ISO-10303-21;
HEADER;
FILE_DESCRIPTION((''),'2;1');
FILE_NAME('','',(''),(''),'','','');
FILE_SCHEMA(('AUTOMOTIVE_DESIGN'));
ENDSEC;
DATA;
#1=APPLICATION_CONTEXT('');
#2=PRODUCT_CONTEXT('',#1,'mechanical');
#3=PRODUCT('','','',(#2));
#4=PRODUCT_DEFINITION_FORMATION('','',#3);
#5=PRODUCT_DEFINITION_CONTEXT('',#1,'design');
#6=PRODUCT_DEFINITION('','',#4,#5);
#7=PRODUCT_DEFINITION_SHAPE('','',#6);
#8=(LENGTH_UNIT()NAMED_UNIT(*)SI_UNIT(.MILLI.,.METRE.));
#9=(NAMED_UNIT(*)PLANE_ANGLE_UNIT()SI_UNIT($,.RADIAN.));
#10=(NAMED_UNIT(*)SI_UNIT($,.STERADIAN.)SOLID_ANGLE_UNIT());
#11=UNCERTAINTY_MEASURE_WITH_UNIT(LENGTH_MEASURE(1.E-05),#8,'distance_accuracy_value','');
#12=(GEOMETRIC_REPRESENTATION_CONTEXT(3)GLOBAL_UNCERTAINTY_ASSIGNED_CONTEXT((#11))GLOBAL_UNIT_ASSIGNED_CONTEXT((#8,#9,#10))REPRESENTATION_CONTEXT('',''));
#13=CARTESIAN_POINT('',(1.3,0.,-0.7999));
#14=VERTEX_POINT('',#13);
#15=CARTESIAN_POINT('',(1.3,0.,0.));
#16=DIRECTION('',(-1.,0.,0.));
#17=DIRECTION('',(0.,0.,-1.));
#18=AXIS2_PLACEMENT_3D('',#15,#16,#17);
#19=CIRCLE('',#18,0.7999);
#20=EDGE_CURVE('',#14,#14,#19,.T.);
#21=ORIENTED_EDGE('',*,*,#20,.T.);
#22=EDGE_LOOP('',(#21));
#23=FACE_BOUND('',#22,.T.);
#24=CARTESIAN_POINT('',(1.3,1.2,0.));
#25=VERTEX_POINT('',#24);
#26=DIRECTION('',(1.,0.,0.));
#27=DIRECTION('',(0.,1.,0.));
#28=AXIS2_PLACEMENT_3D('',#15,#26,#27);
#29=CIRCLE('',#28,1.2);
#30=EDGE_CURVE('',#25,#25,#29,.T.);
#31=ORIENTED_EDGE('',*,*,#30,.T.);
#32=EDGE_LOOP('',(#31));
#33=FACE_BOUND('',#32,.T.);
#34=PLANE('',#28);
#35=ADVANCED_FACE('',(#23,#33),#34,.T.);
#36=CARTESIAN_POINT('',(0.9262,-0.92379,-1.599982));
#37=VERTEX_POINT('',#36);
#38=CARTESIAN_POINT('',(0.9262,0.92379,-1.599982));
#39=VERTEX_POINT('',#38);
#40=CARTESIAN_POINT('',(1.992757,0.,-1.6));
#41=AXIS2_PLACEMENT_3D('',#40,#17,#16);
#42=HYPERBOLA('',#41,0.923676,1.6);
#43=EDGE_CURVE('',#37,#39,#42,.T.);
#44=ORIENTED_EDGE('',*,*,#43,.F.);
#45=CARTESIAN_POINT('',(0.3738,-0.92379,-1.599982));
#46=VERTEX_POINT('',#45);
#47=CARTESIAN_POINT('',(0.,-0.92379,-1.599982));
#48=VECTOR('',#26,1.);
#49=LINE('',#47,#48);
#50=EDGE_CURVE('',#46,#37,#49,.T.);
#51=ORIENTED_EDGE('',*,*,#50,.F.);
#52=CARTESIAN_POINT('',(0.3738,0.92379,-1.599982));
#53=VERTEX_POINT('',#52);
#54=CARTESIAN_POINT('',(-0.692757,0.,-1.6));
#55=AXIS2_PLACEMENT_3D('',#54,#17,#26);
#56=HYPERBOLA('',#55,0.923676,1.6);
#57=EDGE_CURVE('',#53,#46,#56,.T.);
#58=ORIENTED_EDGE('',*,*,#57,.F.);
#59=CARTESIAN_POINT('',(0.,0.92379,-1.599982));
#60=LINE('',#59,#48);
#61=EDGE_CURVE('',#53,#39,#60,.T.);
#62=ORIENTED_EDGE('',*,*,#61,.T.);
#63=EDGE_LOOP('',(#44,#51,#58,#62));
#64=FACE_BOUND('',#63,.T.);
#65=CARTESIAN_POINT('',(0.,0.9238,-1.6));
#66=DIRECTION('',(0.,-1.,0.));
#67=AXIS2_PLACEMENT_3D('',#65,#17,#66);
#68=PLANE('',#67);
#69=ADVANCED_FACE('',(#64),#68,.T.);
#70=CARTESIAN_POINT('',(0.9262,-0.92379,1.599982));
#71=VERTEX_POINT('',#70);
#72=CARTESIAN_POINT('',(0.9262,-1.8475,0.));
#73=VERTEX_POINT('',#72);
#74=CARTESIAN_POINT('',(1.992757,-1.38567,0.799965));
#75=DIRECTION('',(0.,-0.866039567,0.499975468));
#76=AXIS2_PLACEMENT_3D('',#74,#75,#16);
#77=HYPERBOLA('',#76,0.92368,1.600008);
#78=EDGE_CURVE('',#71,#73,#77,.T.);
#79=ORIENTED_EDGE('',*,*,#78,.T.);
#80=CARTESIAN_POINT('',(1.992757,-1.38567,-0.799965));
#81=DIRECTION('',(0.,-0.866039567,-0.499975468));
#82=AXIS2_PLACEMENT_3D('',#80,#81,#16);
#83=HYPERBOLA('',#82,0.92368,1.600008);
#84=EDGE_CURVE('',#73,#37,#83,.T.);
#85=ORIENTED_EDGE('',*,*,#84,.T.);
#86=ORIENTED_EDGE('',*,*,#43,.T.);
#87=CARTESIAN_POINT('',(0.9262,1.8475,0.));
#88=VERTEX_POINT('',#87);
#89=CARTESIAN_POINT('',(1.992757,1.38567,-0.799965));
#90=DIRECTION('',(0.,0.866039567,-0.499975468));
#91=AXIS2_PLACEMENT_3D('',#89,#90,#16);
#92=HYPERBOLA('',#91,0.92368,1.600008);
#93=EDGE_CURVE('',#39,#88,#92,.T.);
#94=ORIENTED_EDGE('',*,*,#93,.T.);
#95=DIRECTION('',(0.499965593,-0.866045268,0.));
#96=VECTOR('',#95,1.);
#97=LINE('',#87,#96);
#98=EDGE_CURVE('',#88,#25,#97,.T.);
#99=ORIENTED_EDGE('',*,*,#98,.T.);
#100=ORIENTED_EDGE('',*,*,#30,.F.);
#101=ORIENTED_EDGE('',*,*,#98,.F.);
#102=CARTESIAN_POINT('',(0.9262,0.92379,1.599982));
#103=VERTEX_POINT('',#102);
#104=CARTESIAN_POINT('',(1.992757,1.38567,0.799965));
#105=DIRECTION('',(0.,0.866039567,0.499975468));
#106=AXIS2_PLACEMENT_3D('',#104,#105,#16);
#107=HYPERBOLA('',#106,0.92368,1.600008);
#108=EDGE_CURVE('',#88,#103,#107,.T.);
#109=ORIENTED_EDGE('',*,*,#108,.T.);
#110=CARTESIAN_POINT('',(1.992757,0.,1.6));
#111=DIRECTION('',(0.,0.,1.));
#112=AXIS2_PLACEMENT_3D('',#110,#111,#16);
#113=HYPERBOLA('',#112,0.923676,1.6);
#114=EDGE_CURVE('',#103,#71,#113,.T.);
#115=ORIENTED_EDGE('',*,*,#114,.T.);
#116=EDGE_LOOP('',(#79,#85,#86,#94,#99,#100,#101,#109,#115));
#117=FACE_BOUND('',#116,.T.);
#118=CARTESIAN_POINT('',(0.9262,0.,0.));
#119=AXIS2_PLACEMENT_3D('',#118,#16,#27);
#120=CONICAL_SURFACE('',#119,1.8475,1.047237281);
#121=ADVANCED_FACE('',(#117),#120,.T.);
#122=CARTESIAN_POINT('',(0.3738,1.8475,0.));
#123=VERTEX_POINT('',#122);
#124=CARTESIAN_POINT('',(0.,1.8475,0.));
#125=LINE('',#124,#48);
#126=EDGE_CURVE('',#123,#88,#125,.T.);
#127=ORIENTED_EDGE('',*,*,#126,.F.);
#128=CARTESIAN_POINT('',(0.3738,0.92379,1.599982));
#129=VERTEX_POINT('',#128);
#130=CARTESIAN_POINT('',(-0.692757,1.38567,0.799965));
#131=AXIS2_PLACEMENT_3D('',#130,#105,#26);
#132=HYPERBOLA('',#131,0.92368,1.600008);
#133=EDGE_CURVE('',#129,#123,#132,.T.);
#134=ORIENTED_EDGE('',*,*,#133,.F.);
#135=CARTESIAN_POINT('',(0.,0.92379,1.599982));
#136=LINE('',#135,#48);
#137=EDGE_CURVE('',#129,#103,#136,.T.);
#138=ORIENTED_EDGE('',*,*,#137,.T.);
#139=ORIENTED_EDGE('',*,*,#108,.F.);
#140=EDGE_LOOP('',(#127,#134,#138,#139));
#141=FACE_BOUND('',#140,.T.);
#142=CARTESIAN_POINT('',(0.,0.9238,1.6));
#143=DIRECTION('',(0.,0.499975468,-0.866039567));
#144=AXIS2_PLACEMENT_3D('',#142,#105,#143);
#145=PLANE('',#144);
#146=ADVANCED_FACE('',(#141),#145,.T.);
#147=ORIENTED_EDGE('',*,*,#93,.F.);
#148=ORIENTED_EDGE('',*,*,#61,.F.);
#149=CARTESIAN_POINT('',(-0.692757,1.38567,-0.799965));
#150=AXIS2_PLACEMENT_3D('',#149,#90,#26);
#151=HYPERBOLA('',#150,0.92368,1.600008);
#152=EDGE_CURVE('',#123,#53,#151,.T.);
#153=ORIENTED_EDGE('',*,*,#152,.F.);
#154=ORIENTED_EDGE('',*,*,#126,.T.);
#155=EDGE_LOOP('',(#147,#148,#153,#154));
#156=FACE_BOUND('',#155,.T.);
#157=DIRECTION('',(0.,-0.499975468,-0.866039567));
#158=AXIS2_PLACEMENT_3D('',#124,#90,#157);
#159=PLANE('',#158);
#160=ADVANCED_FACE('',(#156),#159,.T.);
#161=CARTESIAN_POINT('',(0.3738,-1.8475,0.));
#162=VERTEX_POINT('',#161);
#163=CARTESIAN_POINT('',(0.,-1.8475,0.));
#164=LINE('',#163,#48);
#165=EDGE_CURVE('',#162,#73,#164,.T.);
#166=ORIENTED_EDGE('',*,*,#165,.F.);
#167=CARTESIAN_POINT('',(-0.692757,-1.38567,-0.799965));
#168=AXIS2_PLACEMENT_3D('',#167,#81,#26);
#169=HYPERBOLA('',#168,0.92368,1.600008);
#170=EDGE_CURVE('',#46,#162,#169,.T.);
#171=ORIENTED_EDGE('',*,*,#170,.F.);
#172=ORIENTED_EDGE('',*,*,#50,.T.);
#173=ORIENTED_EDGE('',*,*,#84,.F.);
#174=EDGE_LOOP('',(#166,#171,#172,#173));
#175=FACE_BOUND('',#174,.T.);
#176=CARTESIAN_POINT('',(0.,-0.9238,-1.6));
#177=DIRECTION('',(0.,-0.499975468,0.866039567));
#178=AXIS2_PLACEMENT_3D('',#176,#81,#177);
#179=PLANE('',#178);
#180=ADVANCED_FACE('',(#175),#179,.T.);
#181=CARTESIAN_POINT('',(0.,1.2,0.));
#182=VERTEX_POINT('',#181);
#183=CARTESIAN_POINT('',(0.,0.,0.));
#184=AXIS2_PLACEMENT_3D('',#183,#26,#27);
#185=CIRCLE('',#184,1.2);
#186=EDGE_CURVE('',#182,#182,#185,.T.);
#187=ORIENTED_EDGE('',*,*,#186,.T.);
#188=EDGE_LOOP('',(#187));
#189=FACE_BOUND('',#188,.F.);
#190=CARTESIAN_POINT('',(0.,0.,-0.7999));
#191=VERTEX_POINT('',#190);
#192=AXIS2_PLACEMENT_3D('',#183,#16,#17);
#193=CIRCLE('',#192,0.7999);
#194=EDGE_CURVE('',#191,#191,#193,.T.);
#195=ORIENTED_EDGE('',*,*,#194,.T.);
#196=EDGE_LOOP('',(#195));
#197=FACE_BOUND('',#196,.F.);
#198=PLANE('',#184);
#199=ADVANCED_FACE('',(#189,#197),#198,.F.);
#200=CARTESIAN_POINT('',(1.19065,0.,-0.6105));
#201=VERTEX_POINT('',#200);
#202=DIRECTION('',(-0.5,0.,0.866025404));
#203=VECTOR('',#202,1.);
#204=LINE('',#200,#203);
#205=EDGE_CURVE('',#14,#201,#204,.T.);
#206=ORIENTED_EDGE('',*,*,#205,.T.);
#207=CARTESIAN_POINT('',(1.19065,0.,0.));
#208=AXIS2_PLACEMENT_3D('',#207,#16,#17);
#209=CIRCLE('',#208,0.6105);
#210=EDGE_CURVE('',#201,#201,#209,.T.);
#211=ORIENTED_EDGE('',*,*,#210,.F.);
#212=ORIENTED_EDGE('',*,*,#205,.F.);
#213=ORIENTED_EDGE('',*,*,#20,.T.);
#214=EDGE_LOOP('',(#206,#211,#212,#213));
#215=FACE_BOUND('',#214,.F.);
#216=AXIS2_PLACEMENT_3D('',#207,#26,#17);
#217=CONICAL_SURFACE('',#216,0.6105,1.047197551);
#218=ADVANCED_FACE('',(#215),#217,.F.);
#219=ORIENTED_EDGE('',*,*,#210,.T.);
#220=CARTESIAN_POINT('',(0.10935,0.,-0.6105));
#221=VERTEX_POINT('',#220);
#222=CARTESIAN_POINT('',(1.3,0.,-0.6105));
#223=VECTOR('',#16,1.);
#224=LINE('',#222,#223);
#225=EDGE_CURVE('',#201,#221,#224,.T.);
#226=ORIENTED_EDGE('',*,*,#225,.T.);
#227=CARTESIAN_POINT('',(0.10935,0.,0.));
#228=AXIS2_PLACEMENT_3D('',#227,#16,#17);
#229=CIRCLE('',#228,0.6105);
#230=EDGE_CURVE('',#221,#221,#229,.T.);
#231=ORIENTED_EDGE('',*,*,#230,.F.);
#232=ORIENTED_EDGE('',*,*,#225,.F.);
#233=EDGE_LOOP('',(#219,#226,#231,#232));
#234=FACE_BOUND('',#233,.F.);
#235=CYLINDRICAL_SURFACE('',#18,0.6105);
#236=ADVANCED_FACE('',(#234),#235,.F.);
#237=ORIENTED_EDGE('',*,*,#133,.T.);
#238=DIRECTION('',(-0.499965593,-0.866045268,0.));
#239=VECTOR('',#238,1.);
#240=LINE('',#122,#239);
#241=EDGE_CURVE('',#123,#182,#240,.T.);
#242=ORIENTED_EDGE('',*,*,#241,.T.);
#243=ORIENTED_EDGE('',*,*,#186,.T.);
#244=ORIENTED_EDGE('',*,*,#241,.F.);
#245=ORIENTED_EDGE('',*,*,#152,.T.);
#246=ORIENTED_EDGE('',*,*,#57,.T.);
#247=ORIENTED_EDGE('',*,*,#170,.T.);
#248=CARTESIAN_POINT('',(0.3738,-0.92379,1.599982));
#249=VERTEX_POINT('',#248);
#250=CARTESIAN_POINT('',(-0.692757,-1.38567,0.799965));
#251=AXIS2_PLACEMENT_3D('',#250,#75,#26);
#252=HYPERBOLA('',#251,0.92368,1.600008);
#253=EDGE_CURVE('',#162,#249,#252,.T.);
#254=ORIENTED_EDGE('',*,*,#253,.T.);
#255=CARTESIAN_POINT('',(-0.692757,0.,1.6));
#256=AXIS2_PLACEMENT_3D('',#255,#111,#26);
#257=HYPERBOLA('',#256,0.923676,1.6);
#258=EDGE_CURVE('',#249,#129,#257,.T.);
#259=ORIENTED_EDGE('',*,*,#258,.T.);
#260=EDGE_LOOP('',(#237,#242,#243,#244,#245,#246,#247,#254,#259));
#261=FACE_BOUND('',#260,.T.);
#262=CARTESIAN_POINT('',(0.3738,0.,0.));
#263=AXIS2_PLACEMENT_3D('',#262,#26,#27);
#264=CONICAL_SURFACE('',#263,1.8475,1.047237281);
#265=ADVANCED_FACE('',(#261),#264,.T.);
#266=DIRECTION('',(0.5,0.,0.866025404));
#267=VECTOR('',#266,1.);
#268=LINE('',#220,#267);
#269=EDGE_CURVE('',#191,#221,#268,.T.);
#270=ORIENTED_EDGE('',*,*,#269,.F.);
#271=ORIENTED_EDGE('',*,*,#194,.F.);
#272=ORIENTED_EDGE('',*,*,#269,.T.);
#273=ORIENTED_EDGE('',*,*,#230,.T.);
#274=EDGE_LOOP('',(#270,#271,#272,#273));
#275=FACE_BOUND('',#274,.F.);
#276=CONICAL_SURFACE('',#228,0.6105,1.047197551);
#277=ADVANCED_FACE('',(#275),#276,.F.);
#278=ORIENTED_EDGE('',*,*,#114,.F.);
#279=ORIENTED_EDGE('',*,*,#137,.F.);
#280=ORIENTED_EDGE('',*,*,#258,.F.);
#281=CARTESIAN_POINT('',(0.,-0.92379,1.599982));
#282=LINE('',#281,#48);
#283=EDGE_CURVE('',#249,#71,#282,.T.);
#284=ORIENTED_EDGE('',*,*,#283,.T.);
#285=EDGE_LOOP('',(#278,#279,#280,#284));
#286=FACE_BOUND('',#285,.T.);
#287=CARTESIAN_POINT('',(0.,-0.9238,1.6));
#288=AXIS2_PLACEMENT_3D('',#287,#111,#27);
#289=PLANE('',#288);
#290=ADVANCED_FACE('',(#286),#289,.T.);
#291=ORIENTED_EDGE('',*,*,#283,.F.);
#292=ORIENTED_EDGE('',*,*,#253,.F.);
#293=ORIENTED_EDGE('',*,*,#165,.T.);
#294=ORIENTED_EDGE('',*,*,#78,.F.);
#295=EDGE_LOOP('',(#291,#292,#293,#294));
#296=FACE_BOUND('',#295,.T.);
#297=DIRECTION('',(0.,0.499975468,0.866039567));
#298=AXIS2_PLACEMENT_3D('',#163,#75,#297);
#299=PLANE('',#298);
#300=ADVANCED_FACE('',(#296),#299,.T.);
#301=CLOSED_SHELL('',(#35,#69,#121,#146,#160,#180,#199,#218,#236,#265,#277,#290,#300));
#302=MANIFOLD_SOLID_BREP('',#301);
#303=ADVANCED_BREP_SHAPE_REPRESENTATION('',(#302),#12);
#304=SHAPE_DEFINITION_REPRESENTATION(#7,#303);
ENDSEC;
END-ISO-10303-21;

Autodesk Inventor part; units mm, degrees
ref_plane "YZ Plane" through (0, 0, 0) normal (1, 0, 0) x (0, 1, 0)
ref_plane "XZ Plane" through (0, 0, 0) normal (0, 1, 0) x (-1, 0, 0)
sketch "Sketch1" plane through (0, 0, 0) normal (1, 0, 0) x (0, 1, 0)
  line L0 (-1.8475, 0) -> (-0.9238, 1.6)
  line L1 (-0.9238, 1.6) -> (0.9238, 1.6)
  line L2 (0.9238, 1.6) -> (1.8475, 0)
  line L3 (1.8475, 0) -> (0.9238, -1.6)
  line L4 (0.9238, -1.6) -> (-0.9238, -1.6)
  line L5 (-0.9238, -1.6) -> (-1.8475, 0)
  point P0 (0, 0)
  point P1 (0, 0)
  dimension "d0" = 3.695
extrude "Body" add sketch "Sketch1" along normal blind 1.3
sketch "Sketch2" plane through (0, 0, 0) normal (0, 0, 1) x (1, 0, 0)
  line L0 (0, 0.9238) -> (0, 1.8475) projected
  line L1 (0, 1.8475) -> (1.3, 1.8475) projected
  line L2 (1.3, 0.9238) -> (1.3, 1.8475) projected
  line L3 (-0.26, 0) -> (1.56, 0) projected
  line L4 (0.3738, 1.8475) -> (0, 1.2)
  line L5 (0.9262, 1.8475) -> (1.3, 1.2)
  dimension "d3" = 30
  dimension "d4" = 30
  dimension "d5" = 2.4
  dimension "d6" = 2.4
revolve "Chamfer1" cut sketch "Sketch2" angle 360 about axis through (-10, 0, 0) along (1, 0, 0)
sketch "Sketch3" plane through (1.3, 0, 0) normal (1, 0, 0) x (0, 0, -1)
  arc A0 (-0.625, -1.0825) -> (0.625, -1.0825) centre (0, 0) ccw projected
hole "Thread" at (1.3, 0, 0) direction (-1, 0, 0) diameter 1.221 end through all thread size "M1.6x0.35" class "6H" standard "ISO Metric profile"
chamfer "Chamfer2" distance 0.1894 angle 30 1 edges at (1.3, 0, 0.6105) measured on face at (1.3, 0.9904, -0.1203)
chamfer "Chamfer3" distance 0.1894 angle 30 1 edges at (0, 0, 0.6105) measured on face at (0, 0.9904, -0.1203)
ref_plane "Work Plane1" through (-3.758, 0, 0) normal (0, -0.8660254, -0.5) x (1, 0, 0)
equation "\"d0\" = 1.1547 * SW"
equation "\"d1\" = KOH"
equation "\"d3\" = ANG1"
equation "\"d4\" = ANG2"
equation "\"d5\" = SW0"
equation "\"d6\" = SW01"
equation "\"d8\" = -0.5 * GD1 + 0.5 * NND"
equation "\"d40\" = -0.5 * GD1 + 0.5 * NND"
equation "\"d10\" = -0.5 * GD1 + 0.5 * NND"
equation "\"d41\" = -0.5 * GD1 + 0.5 * NND"
equation "\"ANG1\" = 30deg"
equation "\"ANG2\" = 30deg"
equation "\"NND\" = 1.6"
equation "\"KOH\" = 1.3"
equation "\"SW\" = 3.2"
equation "\"SW0\" = 2.4"
equation "\"SW01\" = SW0"
equation "\"GUL\" = 0.541266 * PTC"
equation "\"THREADDIA\" = 1.6"
equation "\"TOA\" = 30deg"
equation "\"PTC\" = 0.35"
equation "\"E0\" = 1.155 * SW"
equation "\"GAL\" = 0.541266 * PTC"
equation "\"GD1\" = 1.221114"
properties part number "ISO 4032 - M1.6" material "Stainless Steel, 440C"
